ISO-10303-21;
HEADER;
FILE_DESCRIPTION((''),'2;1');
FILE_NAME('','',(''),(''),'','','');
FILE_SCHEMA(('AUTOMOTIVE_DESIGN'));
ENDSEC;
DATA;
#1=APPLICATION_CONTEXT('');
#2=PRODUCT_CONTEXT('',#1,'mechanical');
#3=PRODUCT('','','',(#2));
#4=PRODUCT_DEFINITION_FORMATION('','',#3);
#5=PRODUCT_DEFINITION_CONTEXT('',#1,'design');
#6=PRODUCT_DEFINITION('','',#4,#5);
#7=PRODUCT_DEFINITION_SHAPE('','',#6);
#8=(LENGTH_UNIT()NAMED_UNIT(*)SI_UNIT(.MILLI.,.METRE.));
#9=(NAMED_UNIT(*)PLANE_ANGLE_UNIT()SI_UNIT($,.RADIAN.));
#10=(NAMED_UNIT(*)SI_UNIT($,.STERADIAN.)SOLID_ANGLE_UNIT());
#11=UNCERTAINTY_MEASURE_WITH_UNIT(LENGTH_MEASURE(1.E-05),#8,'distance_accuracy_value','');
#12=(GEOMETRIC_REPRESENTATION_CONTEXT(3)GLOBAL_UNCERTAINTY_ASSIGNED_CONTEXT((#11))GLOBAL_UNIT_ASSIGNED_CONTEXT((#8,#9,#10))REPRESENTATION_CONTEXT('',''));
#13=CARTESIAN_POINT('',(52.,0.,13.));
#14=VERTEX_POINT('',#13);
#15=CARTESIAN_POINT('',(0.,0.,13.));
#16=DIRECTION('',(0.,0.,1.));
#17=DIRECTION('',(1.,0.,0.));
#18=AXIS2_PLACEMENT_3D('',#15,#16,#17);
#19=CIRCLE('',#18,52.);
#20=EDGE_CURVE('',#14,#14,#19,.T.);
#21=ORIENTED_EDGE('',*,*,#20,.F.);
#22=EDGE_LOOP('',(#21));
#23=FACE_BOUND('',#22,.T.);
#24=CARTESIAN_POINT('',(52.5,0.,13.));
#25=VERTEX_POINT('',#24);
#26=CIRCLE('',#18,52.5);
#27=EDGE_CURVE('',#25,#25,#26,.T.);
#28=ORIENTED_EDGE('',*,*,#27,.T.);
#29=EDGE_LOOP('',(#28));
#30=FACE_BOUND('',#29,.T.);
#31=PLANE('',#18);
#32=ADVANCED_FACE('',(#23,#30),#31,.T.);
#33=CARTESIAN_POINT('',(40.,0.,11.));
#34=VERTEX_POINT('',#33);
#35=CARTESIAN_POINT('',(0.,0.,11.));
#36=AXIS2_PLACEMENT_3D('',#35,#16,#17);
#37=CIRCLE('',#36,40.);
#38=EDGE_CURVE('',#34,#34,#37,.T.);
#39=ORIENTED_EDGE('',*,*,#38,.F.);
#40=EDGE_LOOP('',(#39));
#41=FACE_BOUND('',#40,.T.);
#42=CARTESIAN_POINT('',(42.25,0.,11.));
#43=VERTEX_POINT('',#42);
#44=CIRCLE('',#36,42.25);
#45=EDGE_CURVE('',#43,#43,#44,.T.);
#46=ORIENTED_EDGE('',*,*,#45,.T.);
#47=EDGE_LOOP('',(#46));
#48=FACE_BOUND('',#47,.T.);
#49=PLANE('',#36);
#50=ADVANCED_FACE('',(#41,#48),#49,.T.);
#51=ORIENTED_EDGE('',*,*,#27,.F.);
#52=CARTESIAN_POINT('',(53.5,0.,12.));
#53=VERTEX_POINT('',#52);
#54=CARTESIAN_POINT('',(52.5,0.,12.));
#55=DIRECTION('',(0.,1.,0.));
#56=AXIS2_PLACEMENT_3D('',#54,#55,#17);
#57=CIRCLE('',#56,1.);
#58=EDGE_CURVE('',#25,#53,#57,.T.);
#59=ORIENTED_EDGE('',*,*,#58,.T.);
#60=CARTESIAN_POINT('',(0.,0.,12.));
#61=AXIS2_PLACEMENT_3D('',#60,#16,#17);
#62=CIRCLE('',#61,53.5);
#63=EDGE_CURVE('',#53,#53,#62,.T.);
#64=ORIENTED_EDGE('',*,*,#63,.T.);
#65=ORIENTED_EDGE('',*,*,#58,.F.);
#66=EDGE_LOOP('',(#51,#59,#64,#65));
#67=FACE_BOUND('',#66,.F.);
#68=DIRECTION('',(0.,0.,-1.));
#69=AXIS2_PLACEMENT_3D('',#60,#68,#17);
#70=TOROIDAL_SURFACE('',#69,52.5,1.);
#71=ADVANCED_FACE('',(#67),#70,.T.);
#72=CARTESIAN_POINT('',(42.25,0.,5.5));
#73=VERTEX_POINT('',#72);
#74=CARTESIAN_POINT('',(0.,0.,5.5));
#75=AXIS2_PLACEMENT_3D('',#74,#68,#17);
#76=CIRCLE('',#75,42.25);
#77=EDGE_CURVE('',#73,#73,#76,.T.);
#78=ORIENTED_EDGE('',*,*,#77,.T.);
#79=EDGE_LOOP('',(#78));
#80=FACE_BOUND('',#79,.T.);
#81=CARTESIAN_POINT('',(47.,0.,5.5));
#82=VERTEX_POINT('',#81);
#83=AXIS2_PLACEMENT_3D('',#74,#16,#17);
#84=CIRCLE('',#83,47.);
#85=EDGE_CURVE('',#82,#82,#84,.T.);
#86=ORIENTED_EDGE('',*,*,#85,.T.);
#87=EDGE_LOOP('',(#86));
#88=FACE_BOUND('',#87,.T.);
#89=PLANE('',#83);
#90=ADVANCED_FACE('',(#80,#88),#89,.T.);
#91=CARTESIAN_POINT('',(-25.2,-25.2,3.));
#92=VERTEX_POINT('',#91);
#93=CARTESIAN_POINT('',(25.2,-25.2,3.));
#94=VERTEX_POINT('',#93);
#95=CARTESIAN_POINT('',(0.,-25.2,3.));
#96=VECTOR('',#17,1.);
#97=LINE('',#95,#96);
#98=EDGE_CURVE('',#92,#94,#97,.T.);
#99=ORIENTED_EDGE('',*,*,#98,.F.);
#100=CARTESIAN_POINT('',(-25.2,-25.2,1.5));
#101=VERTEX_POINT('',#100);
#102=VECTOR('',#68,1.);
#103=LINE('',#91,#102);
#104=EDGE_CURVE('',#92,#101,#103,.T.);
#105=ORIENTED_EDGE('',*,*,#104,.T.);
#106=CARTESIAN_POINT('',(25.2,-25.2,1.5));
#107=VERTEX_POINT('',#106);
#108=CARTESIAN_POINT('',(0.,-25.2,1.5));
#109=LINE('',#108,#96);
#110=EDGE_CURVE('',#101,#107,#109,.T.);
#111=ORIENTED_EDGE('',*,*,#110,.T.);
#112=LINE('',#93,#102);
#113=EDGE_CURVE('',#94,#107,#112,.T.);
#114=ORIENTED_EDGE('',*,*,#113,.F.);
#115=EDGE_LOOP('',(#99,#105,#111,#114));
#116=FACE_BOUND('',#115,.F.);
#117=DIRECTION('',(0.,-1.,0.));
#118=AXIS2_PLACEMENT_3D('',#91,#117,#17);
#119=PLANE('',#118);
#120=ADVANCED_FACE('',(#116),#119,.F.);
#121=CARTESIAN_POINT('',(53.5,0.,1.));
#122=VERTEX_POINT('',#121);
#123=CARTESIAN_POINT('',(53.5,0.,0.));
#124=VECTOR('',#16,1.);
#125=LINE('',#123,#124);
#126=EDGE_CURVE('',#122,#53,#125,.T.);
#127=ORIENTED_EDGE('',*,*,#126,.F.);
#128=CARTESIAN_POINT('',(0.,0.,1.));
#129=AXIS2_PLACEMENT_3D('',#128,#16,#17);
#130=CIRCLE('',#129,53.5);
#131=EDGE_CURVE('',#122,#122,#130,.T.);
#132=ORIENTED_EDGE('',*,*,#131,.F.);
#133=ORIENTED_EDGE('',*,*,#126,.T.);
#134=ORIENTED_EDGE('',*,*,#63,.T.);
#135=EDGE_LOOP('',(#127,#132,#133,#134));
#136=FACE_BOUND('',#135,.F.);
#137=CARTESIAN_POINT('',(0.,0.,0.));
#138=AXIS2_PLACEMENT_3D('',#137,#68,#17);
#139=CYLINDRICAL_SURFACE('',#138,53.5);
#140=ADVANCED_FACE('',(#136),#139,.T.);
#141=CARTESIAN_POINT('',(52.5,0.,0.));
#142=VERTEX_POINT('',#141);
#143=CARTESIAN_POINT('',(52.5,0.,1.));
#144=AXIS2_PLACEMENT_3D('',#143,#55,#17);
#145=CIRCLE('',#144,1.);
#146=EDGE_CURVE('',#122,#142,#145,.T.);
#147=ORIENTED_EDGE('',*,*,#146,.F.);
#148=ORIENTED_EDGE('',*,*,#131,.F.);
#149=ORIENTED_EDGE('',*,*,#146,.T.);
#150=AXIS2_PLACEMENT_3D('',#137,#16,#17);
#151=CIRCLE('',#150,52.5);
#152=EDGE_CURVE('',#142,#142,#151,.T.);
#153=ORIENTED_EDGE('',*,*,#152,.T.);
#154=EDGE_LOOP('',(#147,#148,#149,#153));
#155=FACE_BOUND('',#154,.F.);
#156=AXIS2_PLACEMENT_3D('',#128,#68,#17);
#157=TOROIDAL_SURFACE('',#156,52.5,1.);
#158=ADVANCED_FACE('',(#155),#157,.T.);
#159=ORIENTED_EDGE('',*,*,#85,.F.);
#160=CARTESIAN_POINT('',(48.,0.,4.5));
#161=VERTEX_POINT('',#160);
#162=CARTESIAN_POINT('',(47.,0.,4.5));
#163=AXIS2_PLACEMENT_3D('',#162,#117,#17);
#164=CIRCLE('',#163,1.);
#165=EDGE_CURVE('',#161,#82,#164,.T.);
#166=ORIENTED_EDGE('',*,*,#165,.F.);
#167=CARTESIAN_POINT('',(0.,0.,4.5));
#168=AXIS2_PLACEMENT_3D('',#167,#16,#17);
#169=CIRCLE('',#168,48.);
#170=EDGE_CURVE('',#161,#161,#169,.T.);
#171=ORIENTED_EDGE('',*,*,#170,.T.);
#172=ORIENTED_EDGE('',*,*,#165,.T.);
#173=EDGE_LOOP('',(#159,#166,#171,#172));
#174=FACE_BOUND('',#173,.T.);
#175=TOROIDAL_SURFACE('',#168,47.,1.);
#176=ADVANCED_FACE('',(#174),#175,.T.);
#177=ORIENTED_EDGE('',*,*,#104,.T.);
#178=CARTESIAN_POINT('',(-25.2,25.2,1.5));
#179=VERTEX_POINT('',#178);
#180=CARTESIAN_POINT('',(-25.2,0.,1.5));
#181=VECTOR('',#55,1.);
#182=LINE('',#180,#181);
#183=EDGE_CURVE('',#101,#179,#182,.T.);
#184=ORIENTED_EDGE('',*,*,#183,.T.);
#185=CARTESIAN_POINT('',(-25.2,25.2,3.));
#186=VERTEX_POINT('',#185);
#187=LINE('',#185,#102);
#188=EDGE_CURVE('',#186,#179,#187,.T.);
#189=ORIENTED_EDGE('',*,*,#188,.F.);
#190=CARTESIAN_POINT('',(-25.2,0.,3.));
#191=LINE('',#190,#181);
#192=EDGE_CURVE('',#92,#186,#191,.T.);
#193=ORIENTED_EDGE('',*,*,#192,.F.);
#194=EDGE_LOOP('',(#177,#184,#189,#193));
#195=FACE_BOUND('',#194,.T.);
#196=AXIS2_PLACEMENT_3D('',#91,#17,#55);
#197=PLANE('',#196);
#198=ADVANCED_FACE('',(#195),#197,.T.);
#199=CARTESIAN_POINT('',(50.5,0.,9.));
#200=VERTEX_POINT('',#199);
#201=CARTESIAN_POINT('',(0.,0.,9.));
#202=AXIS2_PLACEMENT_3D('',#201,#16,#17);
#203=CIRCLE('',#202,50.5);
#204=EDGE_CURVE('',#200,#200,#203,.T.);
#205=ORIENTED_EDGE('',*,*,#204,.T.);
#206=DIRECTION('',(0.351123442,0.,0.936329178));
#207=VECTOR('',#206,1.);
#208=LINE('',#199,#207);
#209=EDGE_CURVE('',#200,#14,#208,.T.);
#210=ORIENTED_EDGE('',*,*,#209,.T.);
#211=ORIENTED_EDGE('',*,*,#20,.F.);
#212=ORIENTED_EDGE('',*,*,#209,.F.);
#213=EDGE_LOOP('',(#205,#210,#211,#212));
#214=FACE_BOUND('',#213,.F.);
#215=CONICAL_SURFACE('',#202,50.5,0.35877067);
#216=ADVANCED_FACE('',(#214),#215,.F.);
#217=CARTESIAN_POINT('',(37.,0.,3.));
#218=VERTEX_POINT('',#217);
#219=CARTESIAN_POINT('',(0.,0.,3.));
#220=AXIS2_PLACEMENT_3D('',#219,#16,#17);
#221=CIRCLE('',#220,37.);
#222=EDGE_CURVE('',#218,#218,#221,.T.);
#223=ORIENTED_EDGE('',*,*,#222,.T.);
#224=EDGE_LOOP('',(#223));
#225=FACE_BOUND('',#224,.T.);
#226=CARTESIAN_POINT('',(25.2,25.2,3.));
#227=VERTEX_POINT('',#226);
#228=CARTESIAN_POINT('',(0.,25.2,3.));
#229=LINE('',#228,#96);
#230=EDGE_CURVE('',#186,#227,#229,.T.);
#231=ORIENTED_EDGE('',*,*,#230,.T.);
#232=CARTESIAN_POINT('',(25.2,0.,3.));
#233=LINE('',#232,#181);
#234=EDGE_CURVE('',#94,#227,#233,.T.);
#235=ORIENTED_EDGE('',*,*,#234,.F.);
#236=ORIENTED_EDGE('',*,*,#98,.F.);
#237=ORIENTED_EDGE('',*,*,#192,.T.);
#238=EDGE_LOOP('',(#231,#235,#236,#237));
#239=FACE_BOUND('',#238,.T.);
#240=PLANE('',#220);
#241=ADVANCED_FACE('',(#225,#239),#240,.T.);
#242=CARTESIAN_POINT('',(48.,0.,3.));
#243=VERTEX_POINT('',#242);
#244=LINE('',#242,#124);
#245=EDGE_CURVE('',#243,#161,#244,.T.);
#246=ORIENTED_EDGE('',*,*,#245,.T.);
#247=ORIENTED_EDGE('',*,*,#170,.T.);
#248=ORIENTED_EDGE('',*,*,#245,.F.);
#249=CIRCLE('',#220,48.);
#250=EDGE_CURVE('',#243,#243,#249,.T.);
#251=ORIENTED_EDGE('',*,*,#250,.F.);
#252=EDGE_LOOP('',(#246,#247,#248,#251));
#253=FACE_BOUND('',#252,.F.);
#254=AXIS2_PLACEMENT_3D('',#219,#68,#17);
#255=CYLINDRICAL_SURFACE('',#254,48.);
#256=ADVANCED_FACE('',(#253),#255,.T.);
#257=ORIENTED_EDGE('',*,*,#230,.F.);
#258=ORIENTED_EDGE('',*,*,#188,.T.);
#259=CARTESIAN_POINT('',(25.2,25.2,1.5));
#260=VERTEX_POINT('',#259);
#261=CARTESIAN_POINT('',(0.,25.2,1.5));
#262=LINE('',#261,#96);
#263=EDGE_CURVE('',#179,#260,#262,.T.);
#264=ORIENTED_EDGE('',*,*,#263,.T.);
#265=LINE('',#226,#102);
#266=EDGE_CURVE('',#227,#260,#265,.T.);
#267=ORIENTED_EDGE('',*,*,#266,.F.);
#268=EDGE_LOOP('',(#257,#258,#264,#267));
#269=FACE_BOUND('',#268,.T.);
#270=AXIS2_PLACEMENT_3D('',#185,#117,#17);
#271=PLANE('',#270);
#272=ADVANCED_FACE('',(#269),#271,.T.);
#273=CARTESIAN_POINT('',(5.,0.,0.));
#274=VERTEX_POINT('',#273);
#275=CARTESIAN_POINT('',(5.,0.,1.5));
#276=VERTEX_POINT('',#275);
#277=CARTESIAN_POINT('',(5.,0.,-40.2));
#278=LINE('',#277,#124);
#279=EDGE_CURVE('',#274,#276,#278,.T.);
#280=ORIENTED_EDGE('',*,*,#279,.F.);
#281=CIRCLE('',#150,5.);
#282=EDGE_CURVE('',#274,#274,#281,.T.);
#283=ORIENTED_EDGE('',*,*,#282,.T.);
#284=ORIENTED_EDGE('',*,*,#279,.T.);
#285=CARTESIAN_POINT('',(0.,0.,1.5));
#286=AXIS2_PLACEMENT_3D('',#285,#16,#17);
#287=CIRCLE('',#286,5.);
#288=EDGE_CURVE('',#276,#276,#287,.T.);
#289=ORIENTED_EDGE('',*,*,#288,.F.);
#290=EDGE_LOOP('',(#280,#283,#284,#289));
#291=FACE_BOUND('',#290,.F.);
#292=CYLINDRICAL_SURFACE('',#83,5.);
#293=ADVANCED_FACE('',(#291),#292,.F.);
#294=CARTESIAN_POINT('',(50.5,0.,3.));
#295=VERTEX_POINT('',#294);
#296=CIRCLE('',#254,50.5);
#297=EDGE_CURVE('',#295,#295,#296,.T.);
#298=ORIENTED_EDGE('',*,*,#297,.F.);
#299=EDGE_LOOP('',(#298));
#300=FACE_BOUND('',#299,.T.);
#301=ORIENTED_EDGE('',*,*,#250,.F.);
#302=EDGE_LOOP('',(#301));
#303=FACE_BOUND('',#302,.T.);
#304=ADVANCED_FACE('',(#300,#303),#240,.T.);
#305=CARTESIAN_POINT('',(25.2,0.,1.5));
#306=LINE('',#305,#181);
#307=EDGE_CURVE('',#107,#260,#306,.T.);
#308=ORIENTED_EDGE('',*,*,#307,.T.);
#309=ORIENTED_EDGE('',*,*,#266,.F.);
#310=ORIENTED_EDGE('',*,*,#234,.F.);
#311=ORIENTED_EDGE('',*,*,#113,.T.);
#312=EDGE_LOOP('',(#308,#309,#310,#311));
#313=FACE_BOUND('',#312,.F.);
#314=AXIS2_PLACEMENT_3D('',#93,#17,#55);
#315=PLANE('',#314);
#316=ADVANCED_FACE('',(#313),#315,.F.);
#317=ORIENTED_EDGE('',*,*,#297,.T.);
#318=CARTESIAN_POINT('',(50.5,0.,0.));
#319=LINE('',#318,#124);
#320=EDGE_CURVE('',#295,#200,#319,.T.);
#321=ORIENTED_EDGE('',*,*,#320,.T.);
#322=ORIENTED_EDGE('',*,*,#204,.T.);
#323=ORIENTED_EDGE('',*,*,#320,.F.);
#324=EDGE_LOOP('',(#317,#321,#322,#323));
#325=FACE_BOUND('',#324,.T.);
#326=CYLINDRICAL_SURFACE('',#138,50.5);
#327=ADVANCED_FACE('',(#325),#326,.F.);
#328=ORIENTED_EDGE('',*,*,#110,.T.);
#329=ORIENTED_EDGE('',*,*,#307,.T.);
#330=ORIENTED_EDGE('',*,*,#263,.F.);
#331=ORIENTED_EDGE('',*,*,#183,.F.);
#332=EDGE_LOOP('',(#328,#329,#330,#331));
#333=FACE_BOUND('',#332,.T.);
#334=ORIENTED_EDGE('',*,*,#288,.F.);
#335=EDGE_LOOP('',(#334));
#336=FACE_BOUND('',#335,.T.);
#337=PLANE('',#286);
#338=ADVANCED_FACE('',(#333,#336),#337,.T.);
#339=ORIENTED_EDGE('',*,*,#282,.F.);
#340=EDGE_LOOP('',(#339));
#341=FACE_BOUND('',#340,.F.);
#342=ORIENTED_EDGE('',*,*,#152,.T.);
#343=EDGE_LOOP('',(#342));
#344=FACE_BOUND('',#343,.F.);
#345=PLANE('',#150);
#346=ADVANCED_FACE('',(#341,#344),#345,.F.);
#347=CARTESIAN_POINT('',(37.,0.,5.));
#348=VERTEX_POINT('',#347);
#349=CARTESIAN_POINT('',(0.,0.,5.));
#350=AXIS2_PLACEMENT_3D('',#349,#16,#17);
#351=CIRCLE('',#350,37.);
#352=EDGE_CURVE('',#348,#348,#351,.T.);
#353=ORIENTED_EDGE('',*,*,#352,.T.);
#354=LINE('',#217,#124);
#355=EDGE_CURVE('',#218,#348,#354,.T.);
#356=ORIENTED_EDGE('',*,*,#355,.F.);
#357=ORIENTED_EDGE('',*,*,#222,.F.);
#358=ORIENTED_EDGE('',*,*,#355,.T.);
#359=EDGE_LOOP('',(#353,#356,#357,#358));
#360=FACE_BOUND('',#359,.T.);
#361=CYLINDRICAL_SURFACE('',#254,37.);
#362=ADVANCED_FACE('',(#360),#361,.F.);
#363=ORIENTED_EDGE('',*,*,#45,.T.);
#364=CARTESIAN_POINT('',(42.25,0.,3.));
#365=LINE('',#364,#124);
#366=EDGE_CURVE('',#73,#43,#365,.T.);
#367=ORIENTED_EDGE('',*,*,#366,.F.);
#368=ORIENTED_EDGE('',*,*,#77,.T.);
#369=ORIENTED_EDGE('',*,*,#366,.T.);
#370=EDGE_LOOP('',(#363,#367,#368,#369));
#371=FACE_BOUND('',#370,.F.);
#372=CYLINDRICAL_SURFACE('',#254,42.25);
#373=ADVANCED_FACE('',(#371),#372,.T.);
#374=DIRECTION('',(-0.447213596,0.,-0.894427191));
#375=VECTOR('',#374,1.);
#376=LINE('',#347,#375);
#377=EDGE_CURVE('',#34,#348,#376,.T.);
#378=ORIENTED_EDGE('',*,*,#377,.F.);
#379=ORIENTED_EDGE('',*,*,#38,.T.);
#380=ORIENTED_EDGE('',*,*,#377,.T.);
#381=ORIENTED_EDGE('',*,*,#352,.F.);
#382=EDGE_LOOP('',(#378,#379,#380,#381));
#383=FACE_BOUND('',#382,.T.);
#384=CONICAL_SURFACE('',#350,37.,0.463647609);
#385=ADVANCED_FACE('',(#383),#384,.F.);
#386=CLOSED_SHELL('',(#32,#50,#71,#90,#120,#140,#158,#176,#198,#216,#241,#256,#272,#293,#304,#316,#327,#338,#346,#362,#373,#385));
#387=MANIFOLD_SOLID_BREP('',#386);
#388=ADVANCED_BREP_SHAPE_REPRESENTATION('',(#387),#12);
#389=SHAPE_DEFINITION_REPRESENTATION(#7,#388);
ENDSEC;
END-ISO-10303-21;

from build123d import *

# Parameters (mm, degrees)
F0_R      = 53.5
F1_DEPTH  = 13
F2_T      = -3
F3_R      = 48
F3_R_2    = 42.25
F3_R_3    = 37
F4_DEPTH  = 2.5
F5_DEPTH  = 8
F6_SIZE2  = 6
F6_SIZE   = 3
F7_SIZE2  = 1.5
F7_SIZE   = 4
F8_R      = 1
F9_R      = 5
F10_DEPTH = 45.7
F11_W     = 50.4
F11_H     = 50.4
F12_DEPTH = 1.5


with BuildPart() as f1:
    # F0 (on Top) → F1 (new body)
    with BuildSketch(Plane.XY):
        Circle(F0_R)
    extrude(amount=F1_DEPTH)

    # F2
    f2_openings = [f1.faces().sort_by_distance(p)[0] for p in [
        (0, 0, 13),
    ]]
    offset(amount=F2_T, openings=f2_openings)

    # F3 (on face) → F4 (join)
    with BuildSketch(Plane.XY.offset(3)):
        Circle(F3_R)
        Circle(F3_R_2, mode=Mode.SUBTRACT)
        Circle(F3_R_2)
        Circle(F3_R_3, mode=Mode.SUBTRACT)
    extrude(amount=F4_DEPTH)

    # F3 (on face) → F5 (join)
    with BuildSketch(Plane.XY.offset(3)):
        Circle(F3_R_2)
        Circle(F3_R_3, mode=Mode.SUBTRACT)
    extrude(amount=F5_DEPTH)

    # F6
    f6_edges = [f1.edges().sort_by_distance(p)[0] for p in [
        (-37, 0, 11),
    ]]
    f6_side = f1.faces().sort_by_distance((-41.05499, 0, 11))[0]
    chamfer(f6_edges, length=F6_SIZE, length2=F6_SIZE2, reference=f6_side)

    # F7
    f7_edges = [f1.edges().sort_by_distance(p)[0] for p in [
        (-50.5, 0, 13),
    ]]
    chamfer(f7_edges, length=F7_SIZE, length2=F7_SIZE2)

    # F8
    f8_edges = [f1.edges().sort_by_distance(p)[0] for p in [
        (-48, 0, 5.5),
        (-53.5, 0, 0),
        (-53.5, 0, 13),
    ]]
    fillet(f8_edges, radius=F8_R)

    # F9 (on face) → F10 (cut, symmetric)
    with BuildSketch(Plane.XY.offset(5.5)):
        Circle(F9_R)
    extrude(amount=F10_DEPTH, both=True, mode=Mode.SUBTRACT)

    # F11 (on face) → F12 (cut)
    with BuildSketch(Plane.XY.offset(3)):
        Rectangle(F11_W, F11_H)
    extrude(amount=-F12_DEPTH, mode=Mode.SUBTRACT)


solid = f1.part
